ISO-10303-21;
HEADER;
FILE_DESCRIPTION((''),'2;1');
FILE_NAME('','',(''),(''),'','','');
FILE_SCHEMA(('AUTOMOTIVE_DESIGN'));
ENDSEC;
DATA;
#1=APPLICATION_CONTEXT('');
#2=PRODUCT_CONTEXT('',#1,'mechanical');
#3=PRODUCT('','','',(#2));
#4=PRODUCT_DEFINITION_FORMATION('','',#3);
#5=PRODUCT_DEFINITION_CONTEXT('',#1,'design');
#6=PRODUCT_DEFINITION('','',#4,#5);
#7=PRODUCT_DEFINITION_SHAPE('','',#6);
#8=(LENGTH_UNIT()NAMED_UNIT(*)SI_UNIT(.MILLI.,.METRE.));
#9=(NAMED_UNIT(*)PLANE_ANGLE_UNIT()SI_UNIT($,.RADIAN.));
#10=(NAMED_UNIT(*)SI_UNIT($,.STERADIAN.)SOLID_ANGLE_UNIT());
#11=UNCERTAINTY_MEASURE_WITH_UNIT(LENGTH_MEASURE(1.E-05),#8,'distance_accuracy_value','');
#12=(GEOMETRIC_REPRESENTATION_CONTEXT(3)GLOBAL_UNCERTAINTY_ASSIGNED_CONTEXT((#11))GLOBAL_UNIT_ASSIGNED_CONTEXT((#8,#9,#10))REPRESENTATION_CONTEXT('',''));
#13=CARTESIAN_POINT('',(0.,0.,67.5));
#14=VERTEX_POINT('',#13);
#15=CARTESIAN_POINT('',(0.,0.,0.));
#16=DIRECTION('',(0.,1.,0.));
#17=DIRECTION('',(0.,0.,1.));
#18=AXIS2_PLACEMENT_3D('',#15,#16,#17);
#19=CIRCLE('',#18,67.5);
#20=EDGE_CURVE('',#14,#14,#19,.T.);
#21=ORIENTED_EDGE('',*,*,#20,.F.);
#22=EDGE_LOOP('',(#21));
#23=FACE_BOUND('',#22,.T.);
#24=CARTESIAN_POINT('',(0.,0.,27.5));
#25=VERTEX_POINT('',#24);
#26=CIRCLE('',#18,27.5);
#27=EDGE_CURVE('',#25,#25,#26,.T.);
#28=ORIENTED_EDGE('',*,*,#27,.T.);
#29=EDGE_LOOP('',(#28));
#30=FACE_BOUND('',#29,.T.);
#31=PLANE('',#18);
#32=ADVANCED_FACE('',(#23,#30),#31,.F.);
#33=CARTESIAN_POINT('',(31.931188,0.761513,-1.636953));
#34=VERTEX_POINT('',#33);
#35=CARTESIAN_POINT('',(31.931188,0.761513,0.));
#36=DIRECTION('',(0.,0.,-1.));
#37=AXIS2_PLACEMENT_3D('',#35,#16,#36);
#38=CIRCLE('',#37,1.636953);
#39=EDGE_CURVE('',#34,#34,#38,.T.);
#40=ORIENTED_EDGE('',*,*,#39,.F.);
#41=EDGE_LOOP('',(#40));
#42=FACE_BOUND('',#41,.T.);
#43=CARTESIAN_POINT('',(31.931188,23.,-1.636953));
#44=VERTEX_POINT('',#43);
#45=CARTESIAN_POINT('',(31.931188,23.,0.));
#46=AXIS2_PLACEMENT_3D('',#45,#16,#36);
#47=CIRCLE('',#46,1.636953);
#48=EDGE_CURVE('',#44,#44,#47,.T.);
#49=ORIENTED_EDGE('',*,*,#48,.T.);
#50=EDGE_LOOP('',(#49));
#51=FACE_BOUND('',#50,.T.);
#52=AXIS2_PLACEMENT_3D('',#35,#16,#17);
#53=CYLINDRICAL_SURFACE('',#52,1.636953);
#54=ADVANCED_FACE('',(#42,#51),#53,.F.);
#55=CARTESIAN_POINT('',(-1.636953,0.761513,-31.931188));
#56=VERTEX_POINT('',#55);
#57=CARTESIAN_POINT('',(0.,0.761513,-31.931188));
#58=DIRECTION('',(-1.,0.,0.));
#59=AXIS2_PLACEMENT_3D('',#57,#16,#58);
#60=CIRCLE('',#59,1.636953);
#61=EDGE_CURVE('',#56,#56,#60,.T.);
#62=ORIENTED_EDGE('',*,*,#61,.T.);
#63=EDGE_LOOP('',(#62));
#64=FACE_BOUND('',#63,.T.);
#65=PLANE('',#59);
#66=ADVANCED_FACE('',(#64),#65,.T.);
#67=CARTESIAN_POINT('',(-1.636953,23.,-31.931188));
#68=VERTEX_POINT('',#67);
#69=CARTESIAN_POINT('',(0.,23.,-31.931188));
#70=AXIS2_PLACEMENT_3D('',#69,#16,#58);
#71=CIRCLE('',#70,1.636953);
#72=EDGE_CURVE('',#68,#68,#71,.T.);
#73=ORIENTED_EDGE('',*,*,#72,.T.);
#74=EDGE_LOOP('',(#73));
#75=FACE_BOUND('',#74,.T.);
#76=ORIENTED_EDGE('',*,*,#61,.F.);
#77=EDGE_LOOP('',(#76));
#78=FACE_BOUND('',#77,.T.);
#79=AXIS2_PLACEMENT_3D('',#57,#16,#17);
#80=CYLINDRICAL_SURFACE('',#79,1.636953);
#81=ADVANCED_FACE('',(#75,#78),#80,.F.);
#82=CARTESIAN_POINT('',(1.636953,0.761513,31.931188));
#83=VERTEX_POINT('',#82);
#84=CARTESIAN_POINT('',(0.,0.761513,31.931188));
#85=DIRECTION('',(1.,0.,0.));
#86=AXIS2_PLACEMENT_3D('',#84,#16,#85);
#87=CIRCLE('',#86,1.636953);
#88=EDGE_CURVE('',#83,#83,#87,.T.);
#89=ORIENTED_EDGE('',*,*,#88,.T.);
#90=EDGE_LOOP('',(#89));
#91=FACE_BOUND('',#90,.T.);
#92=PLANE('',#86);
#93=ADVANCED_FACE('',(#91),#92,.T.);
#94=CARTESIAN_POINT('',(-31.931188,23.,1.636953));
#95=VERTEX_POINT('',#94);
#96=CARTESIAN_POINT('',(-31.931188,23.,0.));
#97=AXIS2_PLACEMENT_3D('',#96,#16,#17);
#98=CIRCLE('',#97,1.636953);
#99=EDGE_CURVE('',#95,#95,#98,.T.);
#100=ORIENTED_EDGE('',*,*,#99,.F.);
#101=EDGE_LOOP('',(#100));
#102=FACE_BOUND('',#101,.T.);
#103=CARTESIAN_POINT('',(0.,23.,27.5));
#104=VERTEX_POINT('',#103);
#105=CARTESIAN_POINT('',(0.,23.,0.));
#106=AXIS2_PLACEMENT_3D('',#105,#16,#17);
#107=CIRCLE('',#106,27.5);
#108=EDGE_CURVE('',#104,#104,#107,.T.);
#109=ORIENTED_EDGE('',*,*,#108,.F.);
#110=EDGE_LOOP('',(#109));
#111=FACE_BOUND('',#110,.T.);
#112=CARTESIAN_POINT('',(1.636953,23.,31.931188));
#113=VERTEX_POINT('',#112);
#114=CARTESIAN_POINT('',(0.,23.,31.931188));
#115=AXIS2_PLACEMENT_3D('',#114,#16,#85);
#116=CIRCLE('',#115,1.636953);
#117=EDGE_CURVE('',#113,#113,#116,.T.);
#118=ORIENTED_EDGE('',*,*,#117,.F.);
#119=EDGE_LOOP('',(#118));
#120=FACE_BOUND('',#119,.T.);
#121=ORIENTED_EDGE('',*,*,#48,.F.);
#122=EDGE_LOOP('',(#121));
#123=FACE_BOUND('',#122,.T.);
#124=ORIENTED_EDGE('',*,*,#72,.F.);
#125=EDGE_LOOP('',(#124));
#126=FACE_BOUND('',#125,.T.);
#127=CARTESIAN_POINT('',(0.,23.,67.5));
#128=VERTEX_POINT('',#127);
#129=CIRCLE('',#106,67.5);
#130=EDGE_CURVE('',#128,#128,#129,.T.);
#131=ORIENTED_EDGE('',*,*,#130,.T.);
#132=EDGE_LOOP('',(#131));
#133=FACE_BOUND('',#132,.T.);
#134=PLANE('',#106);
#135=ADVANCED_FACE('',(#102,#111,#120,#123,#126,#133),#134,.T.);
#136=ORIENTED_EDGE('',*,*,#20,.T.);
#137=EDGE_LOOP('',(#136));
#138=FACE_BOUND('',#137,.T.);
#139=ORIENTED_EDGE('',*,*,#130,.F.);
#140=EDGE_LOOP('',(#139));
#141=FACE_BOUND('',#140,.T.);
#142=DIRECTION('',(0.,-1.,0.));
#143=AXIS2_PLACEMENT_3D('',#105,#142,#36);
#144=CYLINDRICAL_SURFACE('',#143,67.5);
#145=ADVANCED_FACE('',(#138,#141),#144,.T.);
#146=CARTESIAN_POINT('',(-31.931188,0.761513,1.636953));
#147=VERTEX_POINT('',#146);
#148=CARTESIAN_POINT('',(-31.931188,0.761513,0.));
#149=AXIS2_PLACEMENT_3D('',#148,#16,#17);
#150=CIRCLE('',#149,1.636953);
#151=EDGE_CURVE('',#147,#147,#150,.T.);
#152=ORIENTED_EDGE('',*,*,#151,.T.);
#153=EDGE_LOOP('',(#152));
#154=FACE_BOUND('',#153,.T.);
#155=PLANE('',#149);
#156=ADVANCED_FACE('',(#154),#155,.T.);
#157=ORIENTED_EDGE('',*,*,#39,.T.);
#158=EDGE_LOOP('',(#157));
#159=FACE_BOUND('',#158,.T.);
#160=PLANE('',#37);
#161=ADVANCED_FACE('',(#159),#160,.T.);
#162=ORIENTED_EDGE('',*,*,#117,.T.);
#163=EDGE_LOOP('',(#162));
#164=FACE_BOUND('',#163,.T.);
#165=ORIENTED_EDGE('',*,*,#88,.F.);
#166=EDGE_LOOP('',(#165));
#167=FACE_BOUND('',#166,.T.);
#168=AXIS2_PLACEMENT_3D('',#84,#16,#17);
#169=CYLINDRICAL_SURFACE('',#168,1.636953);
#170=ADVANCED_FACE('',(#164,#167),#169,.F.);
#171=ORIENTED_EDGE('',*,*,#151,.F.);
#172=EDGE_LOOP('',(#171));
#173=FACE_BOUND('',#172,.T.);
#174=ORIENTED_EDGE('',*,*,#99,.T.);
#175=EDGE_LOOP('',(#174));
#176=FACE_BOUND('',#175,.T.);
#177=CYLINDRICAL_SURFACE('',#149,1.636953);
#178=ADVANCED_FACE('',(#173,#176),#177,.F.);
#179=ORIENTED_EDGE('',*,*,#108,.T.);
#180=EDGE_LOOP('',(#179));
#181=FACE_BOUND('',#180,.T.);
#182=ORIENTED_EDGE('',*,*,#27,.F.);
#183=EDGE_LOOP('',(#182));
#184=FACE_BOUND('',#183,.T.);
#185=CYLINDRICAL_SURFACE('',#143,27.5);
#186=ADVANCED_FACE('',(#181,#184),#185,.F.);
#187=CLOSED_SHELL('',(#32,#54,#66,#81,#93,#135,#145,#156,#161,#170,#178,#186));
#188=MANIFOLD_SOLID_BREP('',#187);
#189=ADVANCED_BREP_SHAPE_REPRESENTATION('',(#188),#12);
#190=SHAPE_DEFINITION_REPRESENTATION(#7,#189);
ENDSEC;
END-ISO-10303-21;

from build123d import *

# Parameters (mm, degrees)
SKETCH1_R           = 67.5
BOSS_EXTRUDE1_DEPTH = 23
SKETCH2_R           = 27.5
CUT_EXTRUDE1_DEPTH  = 99.19114013
SKETCH3_R           = 1.636952975
CUT_EXTRUDE2_DEPTH  = 22.238487332
CIRPATTERN1_COUNT   = 4


with BuildPart() as part:
    # Sketch1 → Boss-Extrude1 (new body)
    with BuildSketch(Plane(origin=(0, 0, 0), x_dir=(1, 0, 0), z_dir=(0, 1, 0))):
        Circle(SKETCH1_R)
    extrude(amount=BOSS_EXTRUDE1_DEPTH)

    # Sketch2 → Cut-Extrude1 (cut, through all)
    with BuildSketch(Plane(origin=(0, 0, 0), x_dir=(1, 0, 0), z_dir=(0, 1, 0))):
        Circle(SKETCH2_R)
    extrude(amount=CUT_EXTRUDE1_DEPTH, mode=Mode.SUBTRACT)

    # Sketch3 → Cut-Extrude2 (cut)
    with BuildSketch(Plane(origin=(0, 23, 0), x_dir=(1, 0, 0), z_dir=(0, 1, 0))):
        with Locations((-31.931188288, 0)):
            Circle(SKETCH3_R)
    cut_extrude2 = extrude(amount=-CUT_EXTRUDE2_DEPTH, mode=Mode.SUBTRACT)

    # CirPattern1: Cut-Extrude2 ×4 about axis
    cirpattern1_axis = Axis((0, 0, 0), (0, 1, 0))
    for i in range(1, CIRPATTERN1_COUNT):
        add(cut_extrude2.rotate(cirpattern1_axis, i * 360 / CIRPATTERN1_COUNT), mode=Mode.SUBTRACT)


solid = part.part
